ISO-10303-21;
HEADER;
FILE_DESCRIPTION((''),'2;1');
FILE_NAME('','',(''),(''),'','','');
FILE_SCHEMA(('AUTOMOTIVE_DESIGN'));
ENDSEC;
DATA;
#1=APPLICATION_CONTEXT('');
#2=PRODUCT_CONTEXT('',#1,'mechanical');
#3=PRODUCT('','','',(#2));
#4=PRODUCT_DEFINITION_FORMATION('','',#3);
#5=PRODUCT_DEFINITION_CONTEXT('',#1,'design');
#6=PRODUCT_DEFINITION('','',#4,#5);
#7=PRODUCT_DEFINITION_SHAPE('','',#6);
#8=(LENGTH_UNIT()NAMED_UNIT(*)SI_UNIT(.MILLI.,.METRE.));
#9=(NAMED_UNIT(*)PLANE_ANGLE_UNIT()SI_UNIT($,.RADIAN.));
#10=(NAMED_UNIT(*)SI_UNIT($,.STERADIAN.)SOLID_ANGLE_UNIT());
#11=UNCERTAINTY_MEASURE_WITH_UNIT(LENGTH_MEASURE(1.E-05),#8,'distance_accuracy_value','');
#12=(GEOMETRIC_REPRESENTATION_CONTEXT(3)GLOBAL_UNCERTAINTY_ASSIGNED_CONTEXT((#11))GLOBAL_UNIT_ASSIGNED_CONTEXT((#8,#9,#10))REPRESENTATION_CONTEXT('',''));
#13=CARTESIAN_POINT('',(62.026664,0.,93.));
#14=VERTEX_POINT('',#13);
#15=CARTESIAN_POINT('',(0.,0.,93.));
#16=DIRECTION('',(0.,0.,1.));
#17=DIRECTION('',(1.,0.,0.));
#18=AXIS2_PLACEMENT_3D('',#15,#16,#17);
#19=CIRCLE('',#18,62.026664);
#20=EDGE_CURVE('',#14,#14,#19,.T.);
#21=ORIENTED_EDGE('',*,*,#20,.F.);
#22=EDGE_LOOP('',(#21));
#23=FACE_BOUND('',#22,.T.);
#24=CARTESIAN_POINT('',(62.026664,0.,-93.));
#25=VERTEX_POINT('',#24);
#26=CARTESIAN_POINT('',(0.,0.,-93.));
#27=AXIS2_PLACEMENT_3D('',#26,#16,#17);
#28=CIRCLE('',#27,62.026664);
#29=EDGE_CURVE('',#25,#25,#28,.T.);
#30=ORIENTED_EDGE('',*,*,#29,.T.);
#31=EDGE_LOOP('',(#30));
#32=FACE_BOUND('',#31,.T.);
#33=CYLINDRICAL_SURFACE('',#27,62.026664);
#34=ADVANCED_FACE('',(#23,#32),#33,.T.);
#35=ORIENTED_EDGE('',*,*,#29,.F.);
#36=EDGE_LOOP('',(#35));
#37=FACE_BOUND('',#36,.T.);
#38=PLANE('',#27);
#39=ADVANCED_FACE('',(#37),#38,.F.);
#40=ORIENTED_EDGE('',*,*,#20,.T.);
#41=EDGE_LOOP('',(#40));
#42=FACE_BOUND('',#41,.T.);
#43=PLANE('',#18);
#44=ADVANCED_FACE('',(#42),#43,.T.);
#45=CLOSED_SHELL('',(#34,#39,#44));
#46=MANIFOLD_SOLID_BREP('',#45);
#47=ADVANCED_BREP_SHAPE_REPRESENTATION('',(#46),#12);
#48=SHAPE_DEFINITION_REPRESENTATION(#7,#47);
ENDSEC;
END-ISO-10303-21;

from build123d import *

# Parameters (mm, degrees)
KNIT_START       = -93
KNIT_1_OUTLINE_R = 62.02666435
KNIT_1_DEPTH     = 186


# Read off the part's stored shape, not the designer's step: 曲面-缝合1
with BuildPart() as part:
    # Knit 1 outline → Knit 1 (new body)
    with BuildSketch(Plane.XY.offset(KNIT_START)):
        Circle(KNIT_1_OUTLINE_R)
    extrude(amount=KNIT_1_DEPTH)


solid = part.part
